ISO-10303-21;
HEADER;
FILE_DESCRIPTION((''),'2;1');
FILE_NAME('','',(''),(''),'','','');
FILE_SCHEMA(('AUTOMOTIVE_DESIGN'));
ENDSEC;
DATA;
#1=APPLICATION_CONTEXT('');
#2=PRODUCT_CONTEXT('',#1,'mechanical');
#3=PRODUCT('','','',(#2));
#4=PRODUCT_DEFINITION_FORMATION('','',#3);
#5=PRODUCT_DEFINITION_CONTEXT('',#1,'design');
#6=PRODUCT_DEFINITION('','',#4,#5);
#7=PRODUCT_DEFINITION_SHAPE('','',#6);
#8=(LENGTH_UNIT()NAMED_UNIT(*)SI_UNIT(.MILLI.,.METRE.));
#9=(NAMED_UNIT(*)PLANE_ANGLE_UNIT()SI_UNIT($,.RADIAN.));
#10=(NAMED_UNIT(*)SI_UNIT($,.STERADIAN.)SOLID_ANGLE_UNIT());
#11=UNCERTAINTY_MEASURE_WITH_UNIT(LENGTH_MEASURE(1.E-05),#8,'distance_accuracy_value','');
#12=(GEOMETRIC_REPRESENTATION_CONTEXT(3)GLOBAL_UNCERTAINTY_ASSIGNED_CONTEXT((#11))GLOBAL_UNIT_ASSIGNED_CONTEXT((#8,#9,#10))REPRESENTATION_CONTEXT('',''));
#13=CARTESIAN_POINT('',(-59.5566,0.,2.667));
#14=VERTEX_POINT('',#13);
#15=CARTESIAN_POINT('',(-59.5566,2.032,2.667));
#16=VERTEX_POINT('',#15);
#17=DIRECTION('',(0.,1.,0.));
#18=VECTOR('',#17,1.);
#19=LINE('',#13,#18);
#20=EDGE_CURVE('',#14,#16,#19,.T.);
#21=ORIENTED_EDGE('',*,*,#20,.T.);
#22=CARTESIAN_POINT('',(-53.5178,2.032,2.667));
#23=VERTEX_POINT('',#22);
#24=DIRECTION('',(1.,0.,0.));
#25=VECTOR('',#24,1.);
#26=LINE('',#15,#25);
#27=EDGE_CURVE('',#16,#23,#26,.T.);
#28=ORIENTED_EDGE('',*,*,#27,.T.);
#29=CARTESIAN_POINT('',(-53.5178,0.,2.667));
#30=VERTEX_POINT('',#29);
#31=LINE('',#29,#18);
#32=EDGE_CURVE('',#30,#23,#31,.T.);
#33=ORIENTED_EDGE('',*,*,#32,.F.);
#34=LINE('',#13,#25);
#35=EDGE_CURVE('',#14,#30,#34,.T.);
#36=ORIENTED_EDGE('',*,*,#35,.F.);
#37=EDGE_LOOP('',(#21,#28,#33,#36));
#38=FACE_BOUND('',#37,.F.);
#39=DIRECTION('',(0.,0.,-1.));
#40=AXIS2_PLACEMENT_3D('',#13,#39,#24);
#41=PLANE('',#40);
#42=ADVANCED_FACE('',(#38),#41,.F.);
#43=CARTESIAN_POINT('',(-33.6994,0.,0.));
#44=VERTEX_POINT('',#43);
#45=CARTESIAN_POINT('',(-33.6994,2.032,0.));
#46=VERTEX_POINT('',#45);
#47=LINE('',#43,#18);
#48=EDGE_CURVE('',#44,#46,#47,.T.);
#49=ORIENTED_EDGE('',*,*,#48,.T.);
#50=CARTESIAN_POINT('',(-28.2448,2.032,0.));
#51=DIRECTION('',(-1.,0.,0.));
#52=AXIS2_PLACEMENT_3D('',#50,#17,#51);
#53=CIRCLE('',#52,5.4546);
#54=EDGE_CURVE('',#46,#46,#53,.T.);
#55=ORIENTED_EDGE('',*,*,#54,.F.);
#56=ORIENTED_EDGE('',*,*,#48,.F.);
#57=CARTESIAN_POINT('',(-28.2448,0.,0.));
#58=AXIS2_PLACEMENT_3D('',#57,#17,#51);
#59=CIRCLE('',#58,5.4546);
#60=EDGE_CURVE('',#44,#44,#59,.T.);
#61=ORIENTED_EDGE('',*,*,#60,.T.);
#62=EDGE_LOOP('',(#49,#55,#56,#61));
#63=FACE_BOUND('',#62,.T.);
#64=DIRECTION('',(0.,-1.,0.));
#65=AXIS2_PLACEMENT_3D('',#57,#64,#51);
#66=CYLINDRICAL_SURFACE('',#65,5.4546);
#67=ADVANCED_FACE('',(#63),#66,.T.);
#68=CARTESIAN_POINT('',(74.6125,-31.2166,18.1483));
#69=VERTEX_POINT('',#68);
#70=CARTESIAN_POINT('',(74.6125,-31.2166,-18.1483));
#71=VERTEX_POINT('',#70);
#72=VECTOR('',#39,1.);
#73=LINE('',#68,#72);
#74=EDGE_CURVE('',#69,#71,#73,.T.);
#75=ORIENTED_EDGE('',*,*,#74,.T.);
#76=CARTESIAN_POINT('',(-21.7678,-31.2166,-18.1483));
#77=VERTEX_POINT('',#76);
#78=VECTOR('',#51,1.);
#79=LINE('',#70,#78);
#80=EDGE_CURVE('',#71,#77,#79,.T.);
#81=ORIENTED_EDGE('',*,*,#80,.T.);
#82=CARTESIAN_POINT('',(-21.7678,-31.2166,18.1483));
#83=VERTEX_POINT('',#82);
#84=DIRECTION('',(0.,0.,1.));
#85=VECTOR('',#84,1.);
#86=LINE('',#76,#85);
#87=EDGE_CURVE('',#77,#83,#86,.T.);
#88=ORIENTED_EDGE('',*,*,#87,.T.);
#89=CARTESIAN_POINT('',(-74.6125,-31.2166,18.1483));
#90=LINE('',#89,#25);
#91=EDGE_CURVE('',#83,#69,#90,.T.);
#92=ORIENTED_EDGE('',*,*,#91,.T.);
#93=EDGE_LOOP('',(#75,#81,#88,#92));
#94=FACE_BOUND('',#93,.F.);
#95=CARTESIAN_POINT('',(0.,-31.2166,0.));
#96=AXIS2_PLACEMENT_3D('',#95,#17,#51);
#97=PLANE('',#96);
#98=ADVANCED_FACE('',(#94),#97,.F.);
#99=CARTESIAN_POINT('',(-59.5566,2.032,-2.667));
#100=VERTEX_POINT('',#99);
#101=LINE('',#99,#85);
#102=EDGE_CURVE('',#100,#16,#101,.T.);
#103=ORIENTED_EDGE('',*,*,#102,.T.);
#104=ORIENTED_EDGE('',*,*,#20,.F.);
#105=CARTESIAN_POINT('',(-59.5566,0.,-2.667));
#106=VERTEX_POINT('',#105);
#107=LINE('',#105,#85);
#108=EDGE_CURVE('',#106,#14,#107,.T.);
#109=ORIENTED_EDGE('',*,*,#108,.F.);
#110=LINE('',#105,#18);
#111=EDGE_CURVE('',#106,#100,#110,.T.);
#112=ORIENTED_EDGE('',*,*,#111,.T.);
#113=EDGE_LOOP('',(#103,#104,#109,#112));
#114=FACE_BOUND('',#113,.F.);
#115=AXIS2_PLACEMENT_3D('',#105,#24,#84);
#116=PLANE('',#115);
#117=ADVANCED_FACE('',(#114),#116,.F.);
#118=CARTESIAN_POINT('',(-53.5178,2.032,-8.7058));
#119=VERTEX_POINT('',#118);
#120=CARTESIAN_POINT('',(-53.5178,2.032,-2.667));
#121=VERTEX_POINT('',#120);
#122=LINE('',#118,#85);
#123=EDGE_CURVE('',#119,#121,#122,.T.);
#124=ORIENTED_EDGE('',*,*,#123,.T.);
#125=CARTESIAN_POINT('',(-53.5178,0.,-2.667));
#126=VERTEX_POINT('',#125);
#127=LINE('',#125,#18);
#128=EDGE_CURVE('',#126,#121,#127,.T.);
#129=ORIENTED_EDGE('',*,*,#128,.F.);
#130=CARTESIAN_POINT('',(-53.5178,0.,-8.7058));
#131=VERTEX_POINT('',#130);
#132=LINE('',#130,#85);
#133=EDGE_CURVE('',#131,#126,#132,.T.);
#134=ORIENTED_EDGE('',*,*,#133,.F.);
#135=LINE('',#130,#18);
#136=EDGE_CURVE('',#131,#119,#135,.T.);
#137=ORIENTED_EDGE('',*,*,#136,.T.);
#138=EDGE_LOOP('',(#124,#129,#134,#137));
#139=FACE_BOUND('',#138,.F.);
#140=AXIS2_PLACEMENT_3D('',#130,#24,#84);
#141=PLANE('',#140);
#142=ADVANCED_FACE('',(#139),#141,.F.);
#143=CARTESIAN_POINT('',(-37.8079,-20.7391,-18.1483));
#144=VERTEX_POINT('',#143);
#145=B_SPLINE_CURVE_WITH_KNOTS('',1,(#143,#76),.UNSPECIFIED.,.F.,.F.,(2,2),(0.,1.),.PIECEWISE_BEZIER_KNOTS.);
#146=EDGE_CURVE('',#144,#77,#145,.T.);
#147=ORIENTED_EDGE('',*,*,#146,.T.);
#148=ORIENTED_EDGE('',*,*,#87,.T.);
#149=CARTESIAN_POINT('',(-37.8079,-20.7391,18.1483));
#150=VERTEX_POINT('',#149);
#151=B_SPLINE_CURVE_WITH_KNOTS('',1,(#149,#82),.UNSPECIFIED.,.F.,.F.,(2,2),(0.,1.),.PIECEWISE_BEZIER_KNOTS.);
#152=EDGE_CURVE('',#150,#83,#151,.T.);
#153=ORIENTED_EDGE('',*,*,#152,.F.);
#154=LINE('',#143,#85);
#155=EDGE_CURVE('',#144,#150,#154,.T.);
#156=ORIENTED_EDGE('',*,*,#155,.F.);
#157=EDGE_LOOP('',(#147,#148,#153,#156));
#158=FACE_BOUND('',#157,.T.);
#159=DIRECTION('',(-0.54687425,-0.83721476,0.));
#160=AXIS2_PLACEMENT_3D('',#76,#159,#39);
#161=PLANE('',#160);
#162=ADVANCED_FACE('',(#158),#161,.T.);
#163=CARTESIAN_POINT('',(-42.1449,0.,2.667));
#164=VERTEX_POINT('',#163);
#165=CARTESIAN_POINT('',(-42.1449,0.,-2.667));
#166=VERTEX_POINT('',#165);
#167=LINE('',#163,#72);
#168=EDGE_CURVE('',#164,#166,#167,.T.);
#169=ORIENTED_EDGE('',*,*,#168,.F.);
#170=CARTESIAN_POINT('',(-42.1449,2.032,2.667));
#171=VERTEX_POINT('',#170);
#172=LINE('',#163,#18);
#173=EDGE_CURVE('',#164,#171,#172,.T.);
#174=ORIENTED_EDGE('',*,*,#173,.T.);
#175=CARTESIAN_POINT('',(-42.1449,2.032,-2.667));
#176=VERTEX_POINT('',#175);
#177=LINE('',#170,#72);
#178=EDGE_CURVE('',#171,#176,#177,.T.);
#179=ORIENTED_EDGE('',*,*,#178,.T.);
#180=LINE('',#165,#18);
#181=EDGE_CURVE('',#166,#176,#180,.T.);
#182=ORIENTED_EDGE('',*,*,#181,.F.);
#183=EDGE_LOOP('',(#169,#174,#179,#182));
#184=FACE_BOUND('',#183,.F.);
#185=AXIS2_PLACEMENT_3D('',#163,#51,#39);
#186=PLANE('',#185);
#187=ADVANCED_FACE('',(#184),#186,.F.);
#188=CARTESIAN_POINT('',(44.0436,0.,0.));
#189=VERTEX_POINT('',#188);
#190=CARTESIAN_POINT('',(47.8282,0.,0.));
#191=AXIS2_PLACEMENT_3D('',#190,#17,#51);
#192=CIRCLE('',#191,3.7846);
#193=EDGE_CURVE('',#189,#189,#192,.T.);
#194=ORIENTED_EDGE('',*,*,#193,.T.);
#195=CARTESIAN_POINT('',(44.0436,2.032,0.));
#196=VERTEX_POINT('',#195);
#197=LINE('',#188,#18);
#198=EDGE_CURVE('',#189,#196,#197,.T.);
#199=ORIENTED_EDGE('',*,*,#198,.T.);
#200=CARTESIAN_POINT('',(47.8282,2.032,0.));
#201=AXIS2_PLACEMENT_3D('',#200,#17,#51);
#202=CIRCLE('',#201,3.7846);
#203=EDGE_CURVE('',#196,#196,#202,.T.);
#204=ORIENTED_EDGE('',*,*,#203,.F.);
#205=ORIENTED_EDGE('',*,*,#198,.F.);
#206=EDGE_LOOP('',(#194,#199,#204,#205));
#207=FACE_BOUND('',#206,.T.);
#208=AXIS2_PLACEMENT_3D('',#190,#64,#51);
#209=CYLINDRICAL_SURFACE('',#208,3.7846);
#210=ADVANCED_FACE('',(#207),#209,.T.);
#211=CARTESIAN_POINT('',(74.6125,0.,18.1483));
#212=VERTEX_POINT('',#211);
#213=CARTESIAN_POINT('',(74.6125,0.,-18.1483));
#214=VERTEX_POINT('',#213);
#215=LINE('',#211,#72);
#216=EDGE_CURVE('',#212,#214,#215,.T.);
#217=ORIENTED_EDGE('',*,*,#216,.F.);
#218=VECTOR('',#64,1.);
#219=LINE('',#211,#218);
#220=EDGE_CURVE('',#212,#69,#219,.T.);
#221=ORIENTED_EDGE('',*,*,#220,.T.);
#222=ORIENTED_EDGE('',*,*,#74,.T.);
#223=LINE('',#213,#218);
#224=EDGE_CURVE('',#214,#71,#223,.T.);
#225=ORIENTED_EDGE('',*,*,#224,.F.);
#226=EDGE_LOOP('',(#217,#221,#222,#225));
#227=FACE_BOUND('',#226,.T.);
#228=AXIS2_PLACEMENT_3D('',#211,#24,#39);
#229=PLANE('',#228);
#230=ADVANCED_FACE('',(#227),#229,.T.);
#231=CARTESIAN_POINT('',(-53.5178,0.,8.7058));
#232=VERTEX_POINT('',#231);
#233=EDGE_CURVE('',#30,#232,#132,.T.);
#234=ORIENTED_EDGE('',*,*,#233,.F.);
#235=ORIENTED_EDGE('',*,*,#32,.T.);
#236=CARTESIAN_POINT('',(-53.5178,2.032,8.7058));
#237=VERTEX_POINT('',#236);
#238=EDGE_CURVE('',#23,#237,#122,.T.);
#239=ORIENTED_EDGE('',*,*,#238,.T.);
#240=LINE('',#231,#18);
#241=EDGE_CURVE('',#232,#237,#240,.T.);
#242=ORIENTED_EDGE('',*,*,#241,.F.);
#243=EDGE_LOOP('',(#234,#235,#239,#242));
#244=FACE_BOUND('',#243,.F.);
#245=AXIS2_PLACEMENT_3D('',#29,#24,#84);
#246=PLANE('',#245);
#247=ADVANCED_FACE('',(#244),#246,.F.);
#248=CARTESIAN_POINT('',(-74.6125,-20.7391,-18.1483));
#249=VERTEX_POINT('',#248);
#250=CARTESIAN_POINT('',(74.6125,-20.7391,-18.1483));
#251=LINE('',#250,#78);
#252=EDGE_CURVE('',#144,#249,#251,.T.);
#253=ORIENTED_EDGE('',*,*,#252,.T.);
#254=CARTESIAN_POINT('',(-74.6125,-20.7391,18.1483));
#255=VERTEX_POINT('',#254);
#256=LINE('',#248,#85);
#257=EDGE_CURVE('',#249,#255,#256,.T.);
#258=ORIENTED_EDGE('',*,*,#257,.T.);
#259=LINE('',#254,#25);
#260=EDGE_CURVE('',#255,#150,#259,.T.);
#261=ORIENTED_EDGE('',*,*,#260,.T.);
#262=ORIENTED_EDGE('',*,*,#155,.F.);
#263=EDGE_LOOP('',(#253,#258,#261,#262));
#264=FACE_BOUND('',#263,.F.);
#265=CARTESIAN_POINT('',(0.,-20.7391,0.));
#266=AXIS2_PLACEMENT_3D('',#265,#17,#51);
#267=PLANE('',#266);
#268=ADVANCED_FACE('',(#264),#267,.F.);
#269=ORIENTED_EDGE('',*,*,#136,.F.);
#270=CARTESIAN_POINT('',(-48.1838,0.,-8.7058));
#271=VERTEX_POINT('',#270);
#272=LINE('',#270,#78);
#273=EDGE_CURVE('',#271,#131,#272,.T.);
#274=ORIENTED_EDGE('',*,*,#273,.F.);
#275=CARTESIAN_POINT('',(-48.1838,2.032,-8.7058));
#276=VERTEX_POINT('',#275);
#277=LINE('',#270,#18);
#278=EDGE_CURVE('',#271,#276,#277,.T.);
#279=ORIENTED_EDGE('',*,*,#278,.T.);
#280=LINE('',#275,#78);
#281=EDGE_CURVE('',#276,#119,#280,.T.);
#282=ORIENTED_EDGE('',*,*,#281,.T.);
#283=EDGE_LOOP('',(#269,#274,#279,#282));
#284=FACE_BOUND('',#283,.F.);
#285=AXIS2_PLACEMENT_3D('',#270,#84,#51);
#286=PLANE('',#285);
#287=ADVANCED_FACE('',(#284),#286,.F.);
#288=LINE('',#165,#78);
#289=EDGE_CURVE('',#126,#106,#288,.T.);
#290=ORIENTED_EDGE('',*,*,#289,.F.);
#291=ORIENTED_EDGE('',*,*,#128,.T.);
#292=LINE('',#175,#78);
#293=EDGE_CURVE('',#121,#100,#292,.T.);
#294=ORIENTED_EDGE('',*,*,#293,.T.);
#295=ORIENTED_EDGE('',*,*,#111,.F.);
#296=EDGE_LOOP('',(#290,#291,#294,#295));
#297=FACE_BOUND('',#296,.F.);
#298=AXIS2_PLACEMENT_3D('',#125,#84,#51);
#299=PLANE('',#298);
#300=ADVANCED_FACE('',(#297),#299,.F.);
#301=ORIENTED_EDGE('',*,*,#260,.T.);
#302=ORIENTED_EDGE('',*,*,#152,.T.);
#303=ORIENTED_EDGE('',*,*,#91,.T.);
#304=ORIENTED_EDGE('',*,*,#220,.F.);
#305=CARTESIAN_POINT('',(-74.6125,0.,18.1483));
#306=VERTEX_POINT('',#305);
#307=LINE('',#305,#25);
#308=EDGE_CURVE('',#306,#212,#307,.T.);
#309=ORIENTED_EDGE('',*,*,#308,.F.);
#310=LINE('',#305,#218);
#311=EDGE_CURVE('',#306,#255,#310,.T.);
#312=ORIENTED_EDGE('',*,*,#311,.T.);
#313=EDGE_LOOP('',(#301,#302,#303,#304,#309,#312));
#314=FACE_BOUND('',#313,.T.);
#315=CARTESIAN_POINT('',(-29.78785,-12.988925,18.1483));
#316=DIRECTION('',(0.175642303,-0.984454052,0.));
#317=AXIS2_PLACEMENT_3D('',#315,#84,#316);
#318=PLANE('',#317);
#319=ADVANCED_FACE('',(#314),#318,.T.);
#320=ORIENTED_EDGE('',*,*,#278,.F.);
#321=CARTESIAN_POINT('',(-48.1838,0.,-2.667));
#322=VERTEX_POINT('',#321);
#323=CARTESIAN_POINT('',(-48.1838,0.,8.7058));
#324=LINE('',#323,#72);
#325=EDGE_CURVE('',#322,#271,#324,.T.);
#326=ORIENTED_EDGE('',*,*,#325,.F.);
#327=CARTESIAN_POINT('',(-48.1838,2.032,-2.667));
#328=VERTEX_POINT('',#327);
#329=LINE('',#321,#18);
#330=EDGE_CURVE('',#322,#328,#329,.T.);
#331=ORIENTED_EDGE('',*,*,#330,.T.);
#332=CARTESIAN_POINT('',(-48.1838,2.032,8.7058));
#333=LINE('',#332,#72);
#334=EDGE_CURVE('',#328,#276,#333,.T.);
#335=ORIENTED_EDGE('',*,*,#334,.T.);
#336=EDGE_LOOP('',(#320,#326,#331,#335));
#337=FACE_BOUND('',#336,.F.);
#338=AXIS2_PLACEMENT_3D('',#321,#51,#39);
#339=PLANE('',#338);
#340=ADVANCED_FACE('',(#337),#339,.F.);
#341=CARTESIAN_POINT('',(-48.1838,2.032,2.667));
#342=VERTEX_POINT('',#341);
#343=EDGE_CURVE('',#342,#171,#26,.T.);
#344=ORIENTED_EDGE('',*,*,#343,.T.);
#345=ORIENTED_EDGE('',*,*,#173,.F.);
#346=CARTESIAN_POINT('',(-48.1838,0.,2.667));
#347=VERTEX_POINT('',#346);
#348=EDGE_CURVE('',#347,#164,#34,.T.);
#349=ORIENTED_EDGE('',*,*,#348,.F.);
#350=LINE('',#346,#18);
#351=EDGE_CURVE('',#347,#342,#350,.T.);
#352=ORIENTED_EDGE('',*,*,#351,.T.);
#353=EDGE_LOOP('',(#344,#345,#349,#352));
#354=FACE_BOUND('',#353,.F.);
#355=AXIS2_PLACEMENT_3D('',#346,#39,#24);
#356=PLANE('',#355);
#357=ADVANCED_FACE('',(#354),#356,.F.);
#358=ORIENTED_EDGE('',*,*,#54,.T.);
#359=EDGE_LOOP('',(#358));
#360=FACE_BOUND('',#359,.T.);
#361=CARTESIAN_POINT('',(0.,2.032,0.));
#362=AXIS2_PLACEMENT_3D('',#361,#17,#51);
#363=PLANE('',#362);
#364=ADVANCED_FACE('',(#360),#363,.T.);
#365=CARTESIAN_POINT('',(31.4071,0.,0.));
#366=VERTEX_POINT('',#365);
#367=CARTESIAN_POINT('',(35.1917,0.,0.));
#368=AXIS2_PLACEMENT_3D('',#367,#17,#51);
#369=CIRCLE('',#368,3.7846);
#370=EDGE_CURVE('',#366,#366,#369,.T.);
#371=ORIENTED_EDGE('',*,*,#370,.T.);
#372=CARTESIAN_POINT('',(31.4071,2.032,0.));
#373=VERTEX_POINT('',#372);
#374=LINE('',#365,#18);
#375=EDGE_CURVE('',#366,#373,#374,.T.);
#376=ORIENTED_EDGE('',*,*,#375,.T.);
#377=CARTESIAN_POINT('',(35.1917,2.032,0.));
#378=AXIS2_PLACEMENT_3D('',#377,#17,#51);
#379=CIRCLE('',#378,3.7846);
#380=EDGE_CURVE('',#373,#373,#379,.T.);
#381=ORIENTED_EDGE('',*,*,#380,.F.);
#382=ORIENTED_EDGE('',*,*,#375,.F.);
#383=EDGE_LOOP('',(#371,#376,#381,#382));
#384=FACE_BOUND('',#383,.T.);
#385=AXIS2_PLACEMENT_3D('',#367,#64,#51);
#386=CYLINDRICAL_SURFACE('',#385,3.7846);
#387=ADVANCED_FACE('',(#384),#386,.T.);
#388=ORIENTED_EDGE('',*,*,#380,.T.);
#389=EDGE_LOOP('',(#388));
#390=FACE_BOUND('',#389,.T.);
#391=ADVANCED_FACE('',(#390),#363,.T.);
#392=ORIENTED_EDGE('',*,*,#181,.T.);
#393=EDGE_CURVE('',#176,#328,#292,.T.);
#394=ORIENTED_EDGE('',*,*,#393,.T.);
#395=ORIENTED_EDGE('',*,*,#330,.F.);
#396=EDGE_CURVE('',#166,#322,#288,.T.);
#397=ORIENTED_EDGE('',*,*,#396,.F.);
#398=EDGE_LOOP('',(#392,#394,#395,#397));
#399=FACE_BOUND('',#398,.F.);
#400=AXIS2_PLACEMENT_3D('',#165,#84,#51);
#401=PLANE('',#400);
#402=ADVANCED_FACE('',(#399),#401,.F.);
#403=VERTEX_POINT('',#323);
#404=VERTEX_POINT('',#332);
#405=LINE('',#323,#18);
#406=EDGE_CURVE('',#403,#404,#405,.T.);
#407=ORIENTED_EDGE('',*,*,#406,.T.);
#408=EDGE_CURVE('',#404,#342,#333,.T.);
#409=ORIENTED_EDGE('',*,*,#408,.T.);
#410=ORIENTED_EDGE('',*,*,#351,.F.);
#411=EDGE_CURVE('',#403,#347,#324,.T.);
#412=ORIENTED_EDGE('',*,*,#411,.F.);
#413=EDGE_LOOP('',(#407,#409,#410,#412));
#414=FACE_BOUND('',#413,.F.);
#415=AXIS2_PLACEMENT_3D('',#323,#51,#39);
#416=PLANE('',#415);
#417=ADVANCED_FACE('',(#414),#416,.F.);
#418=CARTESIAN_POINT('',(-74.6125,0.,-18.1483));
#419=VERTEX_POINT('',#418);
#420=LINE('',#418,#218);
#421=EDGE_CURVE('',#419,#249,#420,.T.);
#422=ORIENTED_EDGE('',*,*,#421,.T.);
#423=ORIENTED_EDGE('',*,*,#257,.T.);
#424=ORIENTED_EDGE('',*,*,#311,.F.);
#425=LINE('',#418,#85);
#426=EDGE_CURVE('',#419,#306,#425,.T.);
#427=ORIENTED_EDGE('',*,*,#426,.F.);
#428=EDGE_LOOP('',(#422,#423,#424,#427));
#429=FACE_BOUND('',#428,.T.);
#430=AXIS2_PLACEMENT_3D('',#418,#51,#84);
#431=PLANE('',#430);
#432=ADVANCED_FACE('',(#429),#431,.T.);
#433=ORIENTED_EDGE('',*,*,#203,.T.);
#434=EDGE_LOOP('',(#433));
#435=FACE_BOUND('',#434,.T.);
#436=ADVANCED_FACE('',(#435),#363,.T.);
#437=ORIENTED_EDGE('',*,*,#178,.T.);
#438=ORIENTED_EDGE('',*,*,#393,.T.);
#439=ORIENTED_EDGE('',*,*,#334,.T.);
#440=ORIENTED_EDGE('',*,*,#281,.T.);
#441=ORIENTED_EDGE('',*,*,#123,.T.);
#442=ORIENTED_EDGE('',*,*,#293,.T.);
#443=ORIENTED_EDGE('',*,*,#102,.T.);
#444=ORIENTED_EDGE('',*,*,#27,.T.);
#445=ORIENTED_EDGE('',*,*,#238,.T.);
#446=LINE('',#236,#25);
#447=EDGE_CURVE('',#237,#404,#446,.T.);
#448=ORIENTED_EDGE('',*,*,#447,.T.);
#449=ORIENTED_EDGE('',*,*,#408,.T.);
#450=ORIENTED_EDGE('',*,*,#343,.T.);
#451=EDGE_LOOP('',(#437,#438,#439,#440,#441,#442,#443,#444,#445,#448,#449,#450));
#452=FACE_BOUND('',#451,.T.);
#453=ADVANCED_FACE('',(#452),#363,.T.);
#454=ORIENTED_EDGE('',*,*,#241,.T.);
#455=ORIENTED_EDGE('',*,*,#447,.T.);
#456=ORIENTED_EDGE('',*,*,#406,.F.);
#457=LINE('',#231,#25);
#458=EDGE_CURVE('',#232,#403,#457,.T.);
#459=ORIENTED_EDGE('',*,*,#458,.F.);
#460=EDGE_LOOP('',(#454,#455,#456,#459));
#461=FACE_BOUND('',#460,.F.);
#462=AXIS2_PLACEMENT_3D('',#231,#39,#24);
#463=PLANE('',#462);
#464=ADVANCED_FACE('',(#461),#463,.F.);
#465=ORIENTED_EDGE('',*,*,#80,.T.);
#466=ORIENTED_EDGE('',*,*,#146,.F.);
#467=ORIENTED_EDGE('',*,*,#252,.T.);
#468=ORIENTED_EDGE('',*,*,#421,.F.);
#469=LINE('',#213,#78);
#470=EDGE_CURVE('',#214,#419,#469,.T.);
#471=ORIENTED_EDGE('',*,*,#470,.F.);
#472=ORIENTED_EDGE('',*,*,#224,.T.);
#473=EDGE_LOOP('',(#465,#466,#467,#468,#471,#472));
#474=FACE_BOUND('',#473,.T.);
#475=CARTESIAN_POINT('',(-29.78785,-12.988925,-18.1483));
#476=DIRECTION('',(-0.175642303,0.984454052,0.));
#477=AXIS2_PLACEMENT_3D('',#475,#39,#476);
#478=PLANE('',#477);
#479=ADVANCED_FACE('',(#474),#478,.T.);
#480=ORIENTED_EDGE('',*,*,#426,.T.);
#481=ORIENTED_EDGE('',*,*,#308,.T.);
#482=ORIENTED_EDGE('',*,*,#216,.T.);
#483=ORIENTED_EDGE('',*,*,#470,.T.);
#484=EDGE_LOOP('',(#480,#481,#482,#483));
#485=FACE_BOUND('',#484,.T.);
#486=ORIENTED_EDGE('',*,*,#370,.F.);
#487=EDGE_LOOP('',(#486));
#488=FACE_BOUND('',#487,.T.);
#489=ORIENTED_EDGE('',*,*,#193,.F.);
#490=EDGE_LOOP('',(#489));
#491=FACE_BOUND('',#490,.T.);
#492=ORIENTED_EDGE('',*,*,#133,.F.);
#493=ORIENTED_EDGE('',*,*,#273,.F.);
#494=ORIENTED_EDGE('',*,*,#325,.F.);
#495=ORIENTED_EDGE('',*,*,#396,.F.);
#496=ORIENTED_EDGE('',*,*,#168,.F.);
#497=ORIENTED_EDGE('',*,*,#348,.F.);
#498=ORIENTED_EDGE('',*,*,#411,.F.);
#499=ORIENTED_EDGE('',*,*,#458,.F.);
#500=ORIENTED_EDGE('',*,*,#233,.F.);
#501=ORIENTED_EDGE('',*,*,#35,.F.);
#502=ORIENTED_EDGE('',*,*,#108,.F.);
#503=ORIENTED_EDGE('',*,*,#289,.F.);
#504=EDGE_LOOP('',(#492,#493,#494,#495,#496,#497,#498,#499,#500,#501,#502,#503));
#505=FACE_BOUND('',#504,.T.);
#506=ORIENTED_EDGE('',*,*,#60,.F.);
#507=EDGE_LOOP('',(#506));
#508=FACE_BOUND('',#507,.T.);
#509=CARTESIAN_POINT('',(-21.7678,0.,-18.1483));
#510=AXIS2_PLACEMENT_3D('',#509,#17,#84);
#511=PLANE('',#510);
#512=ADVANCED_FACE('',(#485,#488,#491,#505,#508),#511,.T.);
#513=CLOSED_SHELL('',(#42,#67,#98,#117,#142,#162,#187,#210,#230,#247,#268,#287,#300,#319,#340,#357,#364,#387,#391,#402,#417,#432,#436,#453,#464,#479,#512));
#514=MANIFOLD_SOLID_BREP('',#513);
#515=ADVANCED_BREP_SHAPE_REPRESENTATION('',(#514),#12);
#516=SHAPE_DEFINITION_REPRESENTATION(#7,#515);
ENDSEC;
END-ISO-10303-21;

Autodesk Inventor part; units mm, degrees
ref_plane "YZ Plane" through (0, 0, 0) normal (1, 0, 0) x (0, 1, 0)
ref_plane "XZ Plane" through (0, 0, 0) normal (0, 1, 0) x (-1, 0, 0)
ref_plane "XY Plane" through (0, 0, 0) normal (0, 0, 1) x (1, 0, 0)
sketch "Sketch1" plane through (0, 0, 0) normal (0, 1, 0) x (-1, 0, 0)
  line L0 (-74.6125, -18.1483) -> (74.6125, -18.1483)
  line L1 (74.6125, -18.1483) -> (74.6125, 18.1483)
  line L2 (74.6125, 18.1483) -> (-74.6125, 18.1483)
  line L3 (-74.6125, 18.1483) -> (-74.6125, -18.1483)
  line L4 (74.6125, -18.1483) -> (37.8079, -18.1483)
  line L5 (37.8079, -18.1483) -> (37.8079, 18.1483)
  line L6 (37.8079, 18.1483) -> (74.6125, 18.1483)
  line L7 (74.6125, 18.1483) -> (74.6125, -18.1483)
  line L8 (21.7678, 18.1483) -> (-74.6125, 18.1483)
  line L9 (-74.6125, 18.1483) -> (-74.6125, -18.1483)
  line L10 (-74.6125, -18.1483) -> (21.7678, -18.1483)
  line L11 (21.7678, -18.1483) -> (21.7678, 18.1483)
  line L12 (59.5566, 2.667) -> (42.1449, 2.667)
  line L13 (42.1449, 2.667) -> (42.1449, -2.667)
  line L14 (42.1449, -2.667) -> (59.5566, -2.667)
  line L15 (59.5566, -2.667) -> (59.5566, 2.667)
  line L16 (53.5178, 8.7058) -> (48.1838, 8.7058)
  line L17 (48.1838, 8.7058) -> (48.1838, -8.7058)
  line L18 (48.1838, -8.7058) -> (53.5178, -8.7058)
  line L19 (53.5178, -8.7058) -> (53.5178, 8.7058)
  circle A0 centre (-47.8282, 0) radius 3.7846
  circle A1 centre (-35.1917, 0) radius 3.7846
  circle A2 centre (28.2448, 0) radius 5.4546
  point P0 (0, 0)
  point P1 (50.8508, 0)
  dimension "d0" = 149.225
  dimension "d1" = 36.2966
  dimension "d2" = 36.8046
  dimension "d11" = 17.4117
  dimension "d12" = 5.334
  dimension "d13" = 5.334
  dimension "d14" = 17.4117
  dimension "d15" = 7.5692
  dimension "d16" = 7.5692
  dimension "d17" = 10.9093
extrude "Battery" add sketch "Sketch1" against normal blind 31.2166 contours L3 L2 L11 L0 | A0 | A1
extrude "Sensor" add sketch "Sketch1" against normal blind 20.7391 contours L5 L2 L1 L0 | L15 L14 L19 L12 | L19 L14 L17 L12 | L12 L17 L16 L19 | L17 L14 L13 L12 | L19 L18 L17 L14
loft "Loft1" add section 1 edges at (-37.8079, 0, 0) (-37.8079, -10.3696, 18.1483) (-37.8079, -20.7391, 0) (-37.8079, -10.3696, -18.1483) section 2 edges at (-21.7678, 0, 0) (-21.7678, -15.6083, -18.1483) (-21.7678, -31.2166, 0) (-21.7678, -15.6083, 18.1483)
extrude "1 Button" add sketch "Sketch1" along normal blind 2.032 contours A1
extrude "2 Button" add sketch "Sketch1" along normal blind 2.032 contours A0
extrude "A Button" add sketch "Sketch1" along normal blind 2.032 contours A2
extrude "D-Pad" add sketch "Sketch1" along normal blind 2.032 contours L15 L14 L19 L12 | L19 L14 L17 L12 | L12 L17 L16 L19 | L17 L14 L13 L12 | L19 L18 L17 L14
sketch "Sketch2" plane through (0, 0, 0) normal (0, 1, 0) x (1, 0, 0)
  line L0 (57.8104, -18.1483) -> (57.8104, 18.1483)
  line L1 (-64.8843, -18.1483) -> (-64.8843, 18.1483)
  point P0 (0, 0)
properties part number "wiimote"
